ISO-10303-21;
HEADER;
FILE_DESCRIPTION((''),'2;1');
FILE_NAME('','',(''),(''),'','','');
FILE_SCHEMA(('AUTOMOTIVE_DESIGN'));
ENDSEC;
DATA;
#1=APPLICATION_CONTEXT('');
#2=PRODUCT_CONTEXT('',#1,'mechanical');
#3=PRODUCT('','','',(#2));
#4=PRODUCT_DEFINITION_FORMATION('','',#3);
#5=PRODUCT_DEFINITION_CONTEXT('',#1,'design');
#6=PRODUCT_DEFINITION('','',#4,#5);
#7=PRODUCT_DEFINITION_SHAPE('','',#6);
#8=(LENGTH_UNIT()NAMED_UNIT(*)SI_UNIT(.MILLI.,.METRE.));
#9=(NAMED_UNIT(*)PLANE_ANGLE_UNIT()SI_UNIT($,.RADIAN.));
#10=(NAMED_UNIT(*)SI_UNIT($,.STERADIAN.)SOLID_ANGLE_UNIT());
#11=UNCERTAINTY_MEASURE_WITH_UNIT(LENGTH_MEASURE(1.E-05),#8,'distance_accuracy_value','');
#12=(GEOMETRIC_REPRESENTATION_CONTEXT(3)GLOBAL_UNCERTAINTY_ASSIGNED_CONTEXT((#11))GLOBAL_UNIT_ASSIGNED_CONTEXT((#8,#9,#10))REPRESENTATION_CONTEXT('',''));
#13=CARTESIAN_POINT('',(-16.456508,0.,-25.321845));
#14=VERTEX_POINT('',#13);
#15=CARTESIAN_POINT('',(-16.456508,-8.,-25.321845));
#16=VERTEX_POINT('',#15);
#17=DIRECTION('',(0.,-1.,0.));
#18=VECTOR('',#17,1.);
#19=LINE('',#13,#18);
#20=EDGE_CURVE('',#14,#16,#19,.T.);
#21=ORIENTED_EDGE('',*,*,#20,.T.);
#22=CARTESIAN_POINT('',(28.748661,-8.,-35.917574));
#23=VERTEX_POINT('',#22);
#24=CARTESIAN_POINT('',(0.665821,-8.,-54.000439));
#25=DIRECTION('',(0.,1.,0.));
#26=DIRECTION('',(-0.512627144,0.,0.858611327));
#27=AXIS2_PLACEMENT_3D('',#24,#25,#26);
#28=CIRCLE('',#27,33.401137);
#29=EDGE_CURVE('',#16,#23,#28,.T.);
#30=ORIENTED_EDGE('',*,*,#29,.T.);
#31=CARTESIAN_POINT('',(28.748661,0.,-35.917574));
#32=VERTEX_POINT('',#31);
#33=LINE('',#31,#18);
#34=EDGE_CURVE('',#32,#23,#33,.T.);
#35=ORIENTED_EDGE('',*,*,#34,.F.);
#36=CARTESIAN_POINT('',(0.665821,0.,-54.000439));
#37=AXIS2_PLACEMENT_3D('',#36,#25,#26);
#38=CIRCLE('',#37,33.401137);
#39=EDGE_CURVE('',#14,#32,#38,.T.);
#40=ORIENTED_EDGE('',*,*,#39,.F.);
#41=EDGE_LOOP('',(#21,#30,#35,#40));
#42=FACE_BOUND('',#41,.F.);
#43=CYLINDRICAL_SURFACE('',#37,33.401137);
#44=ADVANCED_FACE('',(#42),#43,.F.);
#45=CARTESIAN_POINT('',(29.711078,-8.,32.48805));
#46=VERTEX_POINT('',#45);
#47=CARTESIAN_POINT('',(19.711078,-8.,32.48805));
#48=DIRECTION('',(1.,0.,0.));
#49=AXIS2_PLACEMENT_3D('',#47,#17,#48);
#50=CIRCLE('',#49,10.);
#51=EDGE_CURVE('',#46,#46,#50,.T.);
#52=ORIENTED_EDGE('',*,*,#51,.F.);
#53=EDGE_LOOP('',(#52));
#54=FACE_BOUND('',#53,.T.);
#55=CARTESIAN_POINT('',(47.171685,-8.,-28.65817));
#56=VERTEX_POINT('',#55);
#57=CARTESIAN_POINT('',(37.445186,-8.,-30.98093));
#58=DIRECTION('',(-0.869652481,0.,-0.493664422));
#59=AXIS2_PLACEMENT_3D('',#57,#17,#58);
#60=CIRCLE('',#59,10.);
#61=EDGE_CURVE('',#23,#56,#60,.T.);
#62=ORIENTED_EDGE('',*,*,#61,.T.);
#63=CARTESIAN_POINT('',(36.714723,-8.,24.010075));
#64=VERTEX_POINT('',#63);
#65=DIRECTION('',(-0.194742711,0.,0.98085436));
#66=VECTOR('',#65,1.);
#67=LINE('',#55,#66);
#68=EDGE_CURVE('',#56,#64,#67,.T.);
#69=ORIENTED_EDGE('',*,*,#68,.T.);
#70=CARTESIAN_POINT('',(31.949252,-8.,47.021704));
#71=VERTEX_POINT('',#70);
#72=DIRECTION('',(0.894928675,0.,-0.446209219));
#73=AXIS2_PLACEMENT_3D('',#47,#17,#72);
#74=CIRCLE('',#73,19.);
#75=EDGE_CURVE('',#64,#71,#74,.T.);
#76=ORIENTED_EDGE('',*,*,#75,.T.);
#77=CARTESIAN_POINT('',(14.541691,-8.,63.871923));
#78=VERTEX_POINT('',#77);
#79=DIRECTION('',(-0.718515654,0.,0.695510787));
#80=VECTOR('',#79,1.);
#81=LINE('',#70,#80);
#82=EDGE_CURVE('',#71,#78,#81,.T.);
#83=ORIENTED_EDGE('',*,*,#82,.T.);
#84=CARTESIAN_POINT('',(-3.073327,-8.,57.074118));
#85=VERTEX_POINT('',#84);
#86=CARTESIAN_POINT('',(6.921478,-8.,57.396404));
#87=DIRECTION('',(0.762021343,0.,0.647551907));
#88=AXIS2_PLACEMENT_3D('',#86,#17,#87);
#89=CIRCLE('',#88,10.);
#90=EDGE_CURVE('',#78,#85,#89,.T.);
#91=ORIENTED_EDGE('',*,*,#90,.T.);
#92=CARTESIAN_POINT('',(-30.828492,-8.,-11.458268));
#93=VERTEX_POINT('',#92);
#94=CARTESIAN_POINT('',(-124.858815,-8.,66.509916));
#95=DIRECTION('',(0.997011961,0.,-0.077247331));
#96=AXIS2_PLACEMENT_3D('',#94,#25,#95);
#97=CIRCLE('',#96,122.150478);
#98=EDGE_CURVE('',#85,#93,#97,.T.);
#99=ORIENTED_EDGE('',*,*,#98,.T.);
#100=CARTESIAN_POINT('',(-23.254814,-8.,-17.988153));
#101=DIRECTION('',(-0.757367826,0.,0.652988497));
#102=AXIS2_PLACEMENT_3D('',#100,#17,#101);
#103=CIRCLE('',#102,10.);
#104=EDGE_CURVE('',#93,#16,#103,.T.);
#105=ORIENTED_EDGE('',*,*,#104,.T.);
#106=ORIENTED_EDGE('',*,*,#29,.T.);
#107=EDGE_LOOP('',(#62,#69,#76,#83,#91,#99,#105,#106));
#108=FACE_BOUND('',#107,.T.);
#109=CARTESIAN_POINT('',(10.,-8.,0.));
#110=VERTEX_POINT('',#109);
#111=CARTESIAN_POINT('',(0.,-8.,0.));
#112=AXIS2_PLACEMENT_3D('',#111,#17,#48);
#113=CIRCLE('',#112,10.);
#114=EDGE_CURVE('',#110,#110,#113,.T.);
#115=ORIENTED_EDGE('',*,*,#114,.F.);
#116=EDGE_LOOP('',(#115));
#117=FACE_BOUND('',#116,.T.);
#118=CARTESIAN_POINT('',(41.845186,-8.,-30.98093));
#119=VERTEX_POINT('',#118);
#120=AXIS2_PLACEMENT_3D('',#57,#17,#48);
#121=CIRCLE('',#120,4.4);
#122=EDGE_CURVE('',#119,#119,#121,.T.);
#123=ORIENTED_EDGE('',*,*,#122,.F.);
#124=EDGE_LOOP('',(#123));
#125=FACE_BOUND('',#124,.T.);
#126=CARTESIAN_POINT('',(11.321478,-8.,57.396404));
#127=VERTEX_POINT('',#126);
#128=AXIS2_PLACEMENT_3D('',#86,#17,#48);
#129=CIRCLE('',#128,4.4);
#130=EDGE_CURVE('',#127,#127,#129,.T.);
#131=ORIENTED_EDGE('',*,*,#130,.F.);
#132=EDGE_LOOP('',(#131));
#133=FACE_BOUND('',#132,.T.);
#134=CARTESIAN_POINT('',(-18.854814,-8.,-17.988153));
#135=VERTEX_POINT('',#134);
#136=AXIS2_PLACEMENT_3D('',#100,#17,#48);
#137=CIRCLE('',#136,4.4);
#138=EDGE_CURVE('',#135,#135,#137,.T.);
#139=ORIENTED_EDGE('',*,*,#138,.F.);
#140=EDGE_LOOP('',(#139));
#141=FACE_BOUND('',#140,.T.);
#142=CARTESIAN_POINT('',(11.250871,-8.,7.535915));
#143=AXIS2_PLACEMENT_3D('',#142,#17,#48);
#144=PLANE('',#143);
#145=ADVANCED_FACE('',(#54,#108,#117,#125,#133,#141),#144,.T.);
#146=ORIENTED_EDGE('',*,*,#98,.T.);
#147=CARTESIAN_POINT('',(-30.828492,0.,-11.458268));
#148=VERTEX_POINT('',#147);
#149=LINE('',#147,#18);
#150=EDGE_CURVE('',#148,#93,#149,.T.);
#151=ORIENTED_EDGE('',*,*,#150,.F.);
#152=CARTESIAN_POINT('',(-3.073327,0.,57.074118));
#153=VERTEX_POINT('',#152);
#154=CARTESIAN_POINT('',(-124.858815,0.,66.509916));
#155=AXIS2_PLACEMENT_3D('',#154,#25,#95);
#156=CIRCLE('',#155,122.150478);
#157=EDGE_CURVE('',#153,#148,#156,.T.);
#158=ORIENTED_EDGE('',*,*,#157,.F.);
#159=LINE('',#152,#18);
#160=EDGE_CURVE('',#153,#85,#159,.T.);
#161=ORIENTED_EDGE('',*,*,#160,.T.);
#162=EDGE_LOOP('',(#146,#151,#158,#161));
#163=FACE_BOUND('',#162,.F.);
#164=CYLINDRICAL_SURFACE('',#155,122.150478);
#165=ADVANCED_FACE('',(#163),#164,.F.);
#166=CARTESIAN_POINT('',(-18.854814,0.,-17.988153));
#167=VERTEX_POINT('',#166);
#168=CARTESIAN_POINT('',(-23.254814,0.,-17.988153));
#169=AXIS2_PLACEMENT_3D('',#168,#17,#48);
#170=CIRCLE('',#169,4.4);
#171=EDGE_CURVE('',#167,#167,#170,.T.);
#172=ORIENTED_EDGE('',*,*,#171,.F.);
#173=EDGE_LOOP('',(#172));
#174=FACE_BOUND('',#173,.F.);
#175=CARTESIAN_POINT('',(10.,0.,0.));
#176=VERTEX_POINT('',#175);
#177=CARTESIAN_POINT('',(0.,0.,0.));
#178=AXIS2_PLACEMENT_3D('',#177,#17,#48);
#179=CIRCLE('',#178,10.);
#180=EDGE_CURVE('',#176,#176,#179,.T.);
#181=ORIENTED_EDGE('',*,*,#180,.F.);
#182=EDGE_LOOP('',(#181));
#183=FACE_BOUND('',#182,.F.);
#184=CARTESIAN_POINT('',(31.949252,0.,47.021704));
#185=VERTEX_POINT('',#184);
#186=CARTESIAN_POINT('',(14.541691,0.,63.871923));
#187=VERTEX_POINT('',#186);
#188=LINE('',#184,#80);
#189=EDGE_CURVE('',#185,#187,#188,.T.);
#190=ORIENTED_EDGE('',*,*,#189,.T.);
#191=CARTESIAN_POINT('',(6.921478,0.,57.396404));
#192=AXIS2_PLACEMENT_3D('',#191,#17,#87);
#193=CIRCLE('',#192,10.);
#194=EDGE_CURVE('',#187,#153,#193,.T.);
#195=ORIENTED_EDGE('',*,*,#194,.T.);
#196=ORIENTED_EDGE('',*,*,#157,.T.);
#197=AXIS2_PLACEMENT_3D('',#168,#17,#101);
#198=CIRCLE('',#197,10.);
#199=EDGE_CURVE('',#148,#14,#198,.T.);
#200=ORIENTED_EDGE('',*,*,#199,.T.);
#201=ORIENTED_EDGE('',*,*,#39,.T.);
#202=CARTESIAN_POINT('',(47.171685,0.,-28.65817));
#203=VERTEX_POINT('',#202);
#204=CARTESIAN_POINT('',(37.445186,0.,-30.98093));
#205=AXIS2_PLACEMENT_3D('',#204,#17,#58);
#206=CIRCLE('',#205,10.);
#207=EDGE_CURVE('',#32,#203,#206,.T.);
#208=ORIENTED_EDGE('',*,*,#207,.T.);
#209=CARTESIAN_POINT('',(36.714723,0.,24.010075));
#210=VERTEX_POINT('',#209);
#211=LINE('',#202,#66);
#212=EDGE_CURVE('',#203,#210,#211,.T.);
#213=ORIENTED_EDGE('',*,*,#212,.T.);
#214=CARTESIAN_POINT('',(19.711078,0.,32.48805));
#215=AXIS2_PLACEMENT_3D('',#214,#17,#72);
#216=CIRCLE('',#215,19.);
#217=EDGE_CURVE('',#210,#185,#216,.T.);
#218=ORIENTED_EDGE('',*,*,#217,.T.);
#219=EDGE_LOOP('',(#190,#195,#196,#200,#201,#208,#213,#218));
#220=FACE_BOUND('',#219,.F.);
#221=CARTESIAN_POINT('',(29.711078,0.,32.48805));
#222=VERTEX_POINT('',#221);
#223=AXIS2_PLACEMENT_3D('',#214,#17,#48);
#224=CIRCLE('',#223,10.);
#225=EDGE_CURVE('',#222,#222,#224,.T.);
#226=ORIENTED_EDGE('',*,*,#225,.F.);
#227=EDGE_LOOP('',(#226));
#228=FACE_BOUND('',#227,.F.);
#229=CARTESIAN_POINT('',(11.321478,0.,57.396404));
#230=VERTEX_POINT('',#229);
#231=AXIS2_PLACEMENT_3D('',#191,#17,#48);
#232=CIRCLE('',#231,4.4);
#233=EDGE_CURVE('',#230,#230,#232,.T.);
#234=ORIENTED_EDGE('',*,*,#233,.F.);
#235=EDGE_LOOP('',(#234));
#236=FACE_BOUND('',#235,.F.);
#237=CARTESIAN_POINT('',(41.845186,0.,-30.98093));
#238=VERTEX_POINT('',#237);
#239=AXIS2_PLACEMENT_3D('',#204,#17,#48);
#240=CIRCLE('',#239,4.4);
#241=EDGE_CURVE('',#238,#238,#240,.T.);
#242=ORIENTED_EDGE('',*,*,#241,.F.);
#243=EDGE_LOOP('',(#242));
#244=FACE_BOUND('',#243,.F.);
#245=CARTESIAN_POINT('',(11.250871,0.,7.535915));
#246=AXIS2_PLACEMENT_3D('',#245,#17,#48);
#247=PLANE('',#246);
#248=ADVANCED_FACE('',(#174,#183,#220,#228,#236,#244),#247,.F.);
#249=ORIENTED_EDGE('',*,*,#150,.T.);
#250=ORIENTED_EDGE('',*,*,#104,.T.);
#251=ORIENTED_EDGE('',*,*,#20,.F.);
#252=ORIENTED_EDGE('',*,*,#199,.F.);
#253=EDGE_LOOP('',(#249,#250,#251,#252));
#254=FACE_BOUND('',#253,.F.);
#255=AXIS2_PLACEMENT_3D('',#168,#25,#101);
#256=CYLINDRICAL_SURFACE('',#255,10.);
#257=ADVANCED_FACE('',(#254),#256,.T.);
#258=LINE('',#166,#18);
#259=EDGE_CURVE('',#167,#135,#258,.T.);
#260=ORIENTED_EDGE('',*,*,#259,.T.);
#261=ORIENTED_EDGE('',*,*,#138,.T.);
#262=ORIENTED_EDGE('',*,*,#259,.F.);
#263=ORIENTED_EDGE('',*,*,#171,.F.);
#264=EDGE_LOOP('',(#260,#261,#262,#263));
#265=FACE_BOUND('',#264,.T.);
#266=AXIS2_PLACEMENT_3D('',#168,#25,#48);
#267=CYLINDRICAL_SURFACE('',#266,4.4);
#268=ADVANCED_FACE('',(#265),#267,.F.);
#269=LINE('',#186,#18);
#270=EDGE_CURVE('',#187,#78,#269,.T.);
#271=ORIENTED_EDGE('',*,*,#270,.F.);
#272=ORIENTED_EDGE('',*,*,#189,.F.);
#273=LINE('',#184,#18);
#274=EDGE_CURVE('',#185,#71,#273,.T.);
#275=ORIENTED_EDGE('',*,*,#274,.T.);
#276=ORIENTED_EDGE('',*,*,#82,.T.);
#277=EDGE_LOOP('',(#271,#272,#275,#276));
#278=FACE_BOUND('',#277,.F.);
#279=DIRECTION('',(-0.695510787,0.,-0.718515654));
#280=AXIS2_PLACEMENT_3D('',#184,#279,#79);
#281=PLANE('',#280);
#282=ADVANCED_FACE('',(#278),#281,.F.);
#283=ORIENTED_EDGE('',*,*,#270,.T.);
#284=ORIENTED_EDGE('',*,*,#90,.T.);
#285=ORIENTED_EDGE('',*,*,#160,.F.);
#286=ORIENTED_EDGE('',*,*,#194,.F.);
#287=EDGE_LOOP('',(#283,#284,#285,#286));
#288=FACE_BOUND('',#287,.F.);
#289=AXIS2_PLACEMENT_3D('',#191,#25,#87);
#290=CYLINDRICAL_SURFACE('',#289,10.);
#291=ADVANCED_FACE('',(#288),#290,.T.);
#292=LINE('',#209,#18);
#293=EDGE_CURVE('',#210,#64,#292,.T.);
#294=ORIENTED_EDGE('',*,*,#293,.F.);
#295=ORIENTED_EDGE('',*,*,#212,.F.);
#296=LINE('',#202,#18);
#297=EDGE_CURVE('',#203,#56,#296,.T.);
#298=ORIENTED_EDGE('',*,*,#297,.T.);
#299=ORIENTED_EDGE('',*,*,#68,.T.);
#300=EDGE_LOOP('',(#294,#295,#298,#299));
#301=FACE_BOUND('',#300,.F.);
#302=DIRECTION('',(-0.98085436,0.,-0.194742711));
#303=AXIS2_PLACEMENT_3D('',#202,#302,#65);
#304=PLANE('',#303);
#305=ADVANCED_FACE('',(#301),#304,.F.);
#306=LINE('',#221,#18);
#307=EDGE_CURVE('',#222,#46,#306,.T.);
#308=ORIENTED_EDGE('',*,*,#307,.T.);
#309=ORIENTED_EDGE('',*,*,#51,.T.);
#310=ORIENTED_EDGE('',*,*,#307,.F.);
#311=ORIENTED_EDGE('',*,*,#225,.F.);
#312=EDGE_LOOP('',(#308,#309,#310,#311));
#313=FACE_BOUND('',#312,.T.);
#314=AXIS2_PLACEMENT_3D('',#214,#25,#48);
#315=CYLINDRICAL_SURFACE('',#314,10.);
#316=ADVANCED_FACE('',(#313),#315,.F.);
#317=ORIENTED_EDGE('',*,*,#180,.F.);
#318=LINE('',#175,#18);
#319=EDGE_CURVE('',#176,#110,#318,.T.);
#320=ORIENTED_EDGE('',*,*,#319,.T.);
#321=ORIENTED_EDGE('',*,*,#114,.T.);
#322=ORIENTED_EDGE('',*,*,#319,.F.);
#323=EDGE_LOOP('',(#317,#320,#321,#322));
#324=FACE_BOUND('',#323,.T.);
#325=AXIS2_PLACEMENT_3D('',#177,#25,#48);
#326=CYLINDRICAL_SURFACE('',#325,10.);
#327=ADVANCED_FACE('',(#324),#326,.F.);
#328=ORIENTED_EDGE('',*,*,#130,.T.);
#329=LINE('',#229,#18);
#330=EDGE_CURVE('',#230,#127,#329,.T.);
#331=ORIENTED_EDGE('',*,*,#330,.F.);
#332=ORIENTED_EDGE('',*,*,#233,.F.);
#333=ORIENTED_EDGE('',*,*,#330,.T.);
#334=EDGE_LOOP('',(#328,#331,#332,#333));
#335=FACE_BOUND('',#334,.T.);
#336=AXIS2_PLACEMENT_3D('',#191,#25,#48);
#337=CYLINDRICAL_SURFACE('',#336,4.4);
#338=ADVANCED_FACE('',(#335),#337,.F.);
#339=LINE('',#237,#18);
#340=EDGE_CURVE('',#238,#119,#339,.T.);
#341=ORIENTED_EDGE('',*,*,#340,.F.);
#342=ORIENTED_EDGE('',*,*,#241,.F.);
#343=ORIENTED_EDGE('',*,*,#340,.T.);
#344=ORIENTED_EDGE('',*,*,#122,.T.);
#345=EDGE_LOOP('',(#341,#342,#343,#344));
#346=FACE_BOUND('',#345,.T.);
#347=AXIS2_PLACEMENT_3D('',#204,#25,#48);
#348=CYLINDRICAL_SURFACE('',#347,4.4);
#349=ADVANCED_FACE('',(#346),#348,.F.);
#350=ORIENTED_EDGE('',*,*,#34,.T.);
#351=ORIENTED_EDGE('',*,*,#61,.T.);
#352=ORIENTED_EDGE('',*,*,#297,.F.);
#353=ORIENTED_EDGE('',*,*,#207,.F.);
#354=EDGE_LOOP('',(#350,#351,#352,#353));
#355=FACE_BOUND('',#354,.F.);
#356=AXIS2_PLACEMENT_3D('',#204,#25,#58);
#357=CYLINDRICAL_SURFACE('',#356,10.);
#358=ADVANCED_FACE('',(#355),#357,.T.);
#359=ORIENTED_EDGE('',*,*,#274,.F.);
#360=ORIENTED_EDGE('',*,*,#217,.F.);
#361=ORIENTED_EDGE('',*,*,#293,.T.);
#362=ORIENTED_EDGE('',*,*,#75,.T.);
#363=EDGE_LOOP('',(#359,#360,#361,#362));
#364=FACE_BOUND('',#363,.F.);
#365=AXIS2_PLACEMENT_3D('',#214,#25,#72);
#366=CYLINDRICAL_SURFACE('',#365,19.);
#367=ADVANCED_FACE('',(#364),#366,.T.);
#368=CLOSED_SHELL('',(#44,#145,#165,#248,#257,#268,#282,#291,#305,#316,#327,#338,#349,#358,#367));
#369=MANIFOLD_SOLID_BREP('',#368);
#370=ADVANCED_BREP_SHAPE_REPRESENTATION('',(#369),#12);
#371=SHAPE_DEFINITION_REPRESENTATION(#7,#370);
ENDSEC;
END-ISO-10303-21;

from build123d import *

# Parameters (mm, degrees)
F0_R     = 4.4
F0_R_2   = 10
F1_DEPTH = 8


# Not quite as in the source:
# - a feature names something its author has since deleted; it is built from what else it names


with BuildPart() as f1:
    # F0 (on Front) → F1 (new body)
    with BuildSketch(Plane.XZ):
        with BuildLine():
            Line((31.9492522213, 47.021704051), (14.5416913837, 63.871923339))
            ThreePointArc((14.5416913837, 63.871923339), (3.3211707837, 66.7258087658), (-3.0733272697, 57.0741177632))
            ThreePointArc((-3.0733272697, 57.0741177632), (-11.6409365793, 20.6574209247), (-30.8284920773, -11.4582676391))
            ThreePointArc((-30.8284920773, -11.4582676391), (-30.197435382, -25.1853746986), (-16.4565083148, -25.3218448705))
            ThreePointArc((-16.4565083148, -25.3218448705), (8.288194067, -21.4806704364), (28.7486613668, -35.9175743588))
            ThreePointArc((28.7486613668, -35.9175743588), (41.111240011, -40.2846954641), (47.1716852414, -28.6581697108))
            Line((47.1716852414, -28.6581697108), (36.7147233028, 24.0100747195))
            ThreePointArc((36.7147233028, 24.0100747195), (38.3163132105, 36.3410020894), (31.9492522213, 47.021704051))
        make_face()
        with Locations((-23.2548138211, -17.9881526052)):
            Circle(F0_R, mode=Mode.SUBTRACT)
        Circle(F0_R_2, mode=Mode.SUBTRACT)
        with Locations((37.4451861789, -30.9809301349)):
            Circle(F0_R, mode=Mode.SUBTRACT)
        with Locations((6.9214779515, 57.3964042673)):
            Circle(F0_R, mode=Mode.SUBTRACT)
        with Locations((19.7110784827, 32.4880498807)):
            Circle(F0_R_2, mode=Mode.SUBTRACT)
    extrude(amount=F1_DEPTH)


solid = f1.part
